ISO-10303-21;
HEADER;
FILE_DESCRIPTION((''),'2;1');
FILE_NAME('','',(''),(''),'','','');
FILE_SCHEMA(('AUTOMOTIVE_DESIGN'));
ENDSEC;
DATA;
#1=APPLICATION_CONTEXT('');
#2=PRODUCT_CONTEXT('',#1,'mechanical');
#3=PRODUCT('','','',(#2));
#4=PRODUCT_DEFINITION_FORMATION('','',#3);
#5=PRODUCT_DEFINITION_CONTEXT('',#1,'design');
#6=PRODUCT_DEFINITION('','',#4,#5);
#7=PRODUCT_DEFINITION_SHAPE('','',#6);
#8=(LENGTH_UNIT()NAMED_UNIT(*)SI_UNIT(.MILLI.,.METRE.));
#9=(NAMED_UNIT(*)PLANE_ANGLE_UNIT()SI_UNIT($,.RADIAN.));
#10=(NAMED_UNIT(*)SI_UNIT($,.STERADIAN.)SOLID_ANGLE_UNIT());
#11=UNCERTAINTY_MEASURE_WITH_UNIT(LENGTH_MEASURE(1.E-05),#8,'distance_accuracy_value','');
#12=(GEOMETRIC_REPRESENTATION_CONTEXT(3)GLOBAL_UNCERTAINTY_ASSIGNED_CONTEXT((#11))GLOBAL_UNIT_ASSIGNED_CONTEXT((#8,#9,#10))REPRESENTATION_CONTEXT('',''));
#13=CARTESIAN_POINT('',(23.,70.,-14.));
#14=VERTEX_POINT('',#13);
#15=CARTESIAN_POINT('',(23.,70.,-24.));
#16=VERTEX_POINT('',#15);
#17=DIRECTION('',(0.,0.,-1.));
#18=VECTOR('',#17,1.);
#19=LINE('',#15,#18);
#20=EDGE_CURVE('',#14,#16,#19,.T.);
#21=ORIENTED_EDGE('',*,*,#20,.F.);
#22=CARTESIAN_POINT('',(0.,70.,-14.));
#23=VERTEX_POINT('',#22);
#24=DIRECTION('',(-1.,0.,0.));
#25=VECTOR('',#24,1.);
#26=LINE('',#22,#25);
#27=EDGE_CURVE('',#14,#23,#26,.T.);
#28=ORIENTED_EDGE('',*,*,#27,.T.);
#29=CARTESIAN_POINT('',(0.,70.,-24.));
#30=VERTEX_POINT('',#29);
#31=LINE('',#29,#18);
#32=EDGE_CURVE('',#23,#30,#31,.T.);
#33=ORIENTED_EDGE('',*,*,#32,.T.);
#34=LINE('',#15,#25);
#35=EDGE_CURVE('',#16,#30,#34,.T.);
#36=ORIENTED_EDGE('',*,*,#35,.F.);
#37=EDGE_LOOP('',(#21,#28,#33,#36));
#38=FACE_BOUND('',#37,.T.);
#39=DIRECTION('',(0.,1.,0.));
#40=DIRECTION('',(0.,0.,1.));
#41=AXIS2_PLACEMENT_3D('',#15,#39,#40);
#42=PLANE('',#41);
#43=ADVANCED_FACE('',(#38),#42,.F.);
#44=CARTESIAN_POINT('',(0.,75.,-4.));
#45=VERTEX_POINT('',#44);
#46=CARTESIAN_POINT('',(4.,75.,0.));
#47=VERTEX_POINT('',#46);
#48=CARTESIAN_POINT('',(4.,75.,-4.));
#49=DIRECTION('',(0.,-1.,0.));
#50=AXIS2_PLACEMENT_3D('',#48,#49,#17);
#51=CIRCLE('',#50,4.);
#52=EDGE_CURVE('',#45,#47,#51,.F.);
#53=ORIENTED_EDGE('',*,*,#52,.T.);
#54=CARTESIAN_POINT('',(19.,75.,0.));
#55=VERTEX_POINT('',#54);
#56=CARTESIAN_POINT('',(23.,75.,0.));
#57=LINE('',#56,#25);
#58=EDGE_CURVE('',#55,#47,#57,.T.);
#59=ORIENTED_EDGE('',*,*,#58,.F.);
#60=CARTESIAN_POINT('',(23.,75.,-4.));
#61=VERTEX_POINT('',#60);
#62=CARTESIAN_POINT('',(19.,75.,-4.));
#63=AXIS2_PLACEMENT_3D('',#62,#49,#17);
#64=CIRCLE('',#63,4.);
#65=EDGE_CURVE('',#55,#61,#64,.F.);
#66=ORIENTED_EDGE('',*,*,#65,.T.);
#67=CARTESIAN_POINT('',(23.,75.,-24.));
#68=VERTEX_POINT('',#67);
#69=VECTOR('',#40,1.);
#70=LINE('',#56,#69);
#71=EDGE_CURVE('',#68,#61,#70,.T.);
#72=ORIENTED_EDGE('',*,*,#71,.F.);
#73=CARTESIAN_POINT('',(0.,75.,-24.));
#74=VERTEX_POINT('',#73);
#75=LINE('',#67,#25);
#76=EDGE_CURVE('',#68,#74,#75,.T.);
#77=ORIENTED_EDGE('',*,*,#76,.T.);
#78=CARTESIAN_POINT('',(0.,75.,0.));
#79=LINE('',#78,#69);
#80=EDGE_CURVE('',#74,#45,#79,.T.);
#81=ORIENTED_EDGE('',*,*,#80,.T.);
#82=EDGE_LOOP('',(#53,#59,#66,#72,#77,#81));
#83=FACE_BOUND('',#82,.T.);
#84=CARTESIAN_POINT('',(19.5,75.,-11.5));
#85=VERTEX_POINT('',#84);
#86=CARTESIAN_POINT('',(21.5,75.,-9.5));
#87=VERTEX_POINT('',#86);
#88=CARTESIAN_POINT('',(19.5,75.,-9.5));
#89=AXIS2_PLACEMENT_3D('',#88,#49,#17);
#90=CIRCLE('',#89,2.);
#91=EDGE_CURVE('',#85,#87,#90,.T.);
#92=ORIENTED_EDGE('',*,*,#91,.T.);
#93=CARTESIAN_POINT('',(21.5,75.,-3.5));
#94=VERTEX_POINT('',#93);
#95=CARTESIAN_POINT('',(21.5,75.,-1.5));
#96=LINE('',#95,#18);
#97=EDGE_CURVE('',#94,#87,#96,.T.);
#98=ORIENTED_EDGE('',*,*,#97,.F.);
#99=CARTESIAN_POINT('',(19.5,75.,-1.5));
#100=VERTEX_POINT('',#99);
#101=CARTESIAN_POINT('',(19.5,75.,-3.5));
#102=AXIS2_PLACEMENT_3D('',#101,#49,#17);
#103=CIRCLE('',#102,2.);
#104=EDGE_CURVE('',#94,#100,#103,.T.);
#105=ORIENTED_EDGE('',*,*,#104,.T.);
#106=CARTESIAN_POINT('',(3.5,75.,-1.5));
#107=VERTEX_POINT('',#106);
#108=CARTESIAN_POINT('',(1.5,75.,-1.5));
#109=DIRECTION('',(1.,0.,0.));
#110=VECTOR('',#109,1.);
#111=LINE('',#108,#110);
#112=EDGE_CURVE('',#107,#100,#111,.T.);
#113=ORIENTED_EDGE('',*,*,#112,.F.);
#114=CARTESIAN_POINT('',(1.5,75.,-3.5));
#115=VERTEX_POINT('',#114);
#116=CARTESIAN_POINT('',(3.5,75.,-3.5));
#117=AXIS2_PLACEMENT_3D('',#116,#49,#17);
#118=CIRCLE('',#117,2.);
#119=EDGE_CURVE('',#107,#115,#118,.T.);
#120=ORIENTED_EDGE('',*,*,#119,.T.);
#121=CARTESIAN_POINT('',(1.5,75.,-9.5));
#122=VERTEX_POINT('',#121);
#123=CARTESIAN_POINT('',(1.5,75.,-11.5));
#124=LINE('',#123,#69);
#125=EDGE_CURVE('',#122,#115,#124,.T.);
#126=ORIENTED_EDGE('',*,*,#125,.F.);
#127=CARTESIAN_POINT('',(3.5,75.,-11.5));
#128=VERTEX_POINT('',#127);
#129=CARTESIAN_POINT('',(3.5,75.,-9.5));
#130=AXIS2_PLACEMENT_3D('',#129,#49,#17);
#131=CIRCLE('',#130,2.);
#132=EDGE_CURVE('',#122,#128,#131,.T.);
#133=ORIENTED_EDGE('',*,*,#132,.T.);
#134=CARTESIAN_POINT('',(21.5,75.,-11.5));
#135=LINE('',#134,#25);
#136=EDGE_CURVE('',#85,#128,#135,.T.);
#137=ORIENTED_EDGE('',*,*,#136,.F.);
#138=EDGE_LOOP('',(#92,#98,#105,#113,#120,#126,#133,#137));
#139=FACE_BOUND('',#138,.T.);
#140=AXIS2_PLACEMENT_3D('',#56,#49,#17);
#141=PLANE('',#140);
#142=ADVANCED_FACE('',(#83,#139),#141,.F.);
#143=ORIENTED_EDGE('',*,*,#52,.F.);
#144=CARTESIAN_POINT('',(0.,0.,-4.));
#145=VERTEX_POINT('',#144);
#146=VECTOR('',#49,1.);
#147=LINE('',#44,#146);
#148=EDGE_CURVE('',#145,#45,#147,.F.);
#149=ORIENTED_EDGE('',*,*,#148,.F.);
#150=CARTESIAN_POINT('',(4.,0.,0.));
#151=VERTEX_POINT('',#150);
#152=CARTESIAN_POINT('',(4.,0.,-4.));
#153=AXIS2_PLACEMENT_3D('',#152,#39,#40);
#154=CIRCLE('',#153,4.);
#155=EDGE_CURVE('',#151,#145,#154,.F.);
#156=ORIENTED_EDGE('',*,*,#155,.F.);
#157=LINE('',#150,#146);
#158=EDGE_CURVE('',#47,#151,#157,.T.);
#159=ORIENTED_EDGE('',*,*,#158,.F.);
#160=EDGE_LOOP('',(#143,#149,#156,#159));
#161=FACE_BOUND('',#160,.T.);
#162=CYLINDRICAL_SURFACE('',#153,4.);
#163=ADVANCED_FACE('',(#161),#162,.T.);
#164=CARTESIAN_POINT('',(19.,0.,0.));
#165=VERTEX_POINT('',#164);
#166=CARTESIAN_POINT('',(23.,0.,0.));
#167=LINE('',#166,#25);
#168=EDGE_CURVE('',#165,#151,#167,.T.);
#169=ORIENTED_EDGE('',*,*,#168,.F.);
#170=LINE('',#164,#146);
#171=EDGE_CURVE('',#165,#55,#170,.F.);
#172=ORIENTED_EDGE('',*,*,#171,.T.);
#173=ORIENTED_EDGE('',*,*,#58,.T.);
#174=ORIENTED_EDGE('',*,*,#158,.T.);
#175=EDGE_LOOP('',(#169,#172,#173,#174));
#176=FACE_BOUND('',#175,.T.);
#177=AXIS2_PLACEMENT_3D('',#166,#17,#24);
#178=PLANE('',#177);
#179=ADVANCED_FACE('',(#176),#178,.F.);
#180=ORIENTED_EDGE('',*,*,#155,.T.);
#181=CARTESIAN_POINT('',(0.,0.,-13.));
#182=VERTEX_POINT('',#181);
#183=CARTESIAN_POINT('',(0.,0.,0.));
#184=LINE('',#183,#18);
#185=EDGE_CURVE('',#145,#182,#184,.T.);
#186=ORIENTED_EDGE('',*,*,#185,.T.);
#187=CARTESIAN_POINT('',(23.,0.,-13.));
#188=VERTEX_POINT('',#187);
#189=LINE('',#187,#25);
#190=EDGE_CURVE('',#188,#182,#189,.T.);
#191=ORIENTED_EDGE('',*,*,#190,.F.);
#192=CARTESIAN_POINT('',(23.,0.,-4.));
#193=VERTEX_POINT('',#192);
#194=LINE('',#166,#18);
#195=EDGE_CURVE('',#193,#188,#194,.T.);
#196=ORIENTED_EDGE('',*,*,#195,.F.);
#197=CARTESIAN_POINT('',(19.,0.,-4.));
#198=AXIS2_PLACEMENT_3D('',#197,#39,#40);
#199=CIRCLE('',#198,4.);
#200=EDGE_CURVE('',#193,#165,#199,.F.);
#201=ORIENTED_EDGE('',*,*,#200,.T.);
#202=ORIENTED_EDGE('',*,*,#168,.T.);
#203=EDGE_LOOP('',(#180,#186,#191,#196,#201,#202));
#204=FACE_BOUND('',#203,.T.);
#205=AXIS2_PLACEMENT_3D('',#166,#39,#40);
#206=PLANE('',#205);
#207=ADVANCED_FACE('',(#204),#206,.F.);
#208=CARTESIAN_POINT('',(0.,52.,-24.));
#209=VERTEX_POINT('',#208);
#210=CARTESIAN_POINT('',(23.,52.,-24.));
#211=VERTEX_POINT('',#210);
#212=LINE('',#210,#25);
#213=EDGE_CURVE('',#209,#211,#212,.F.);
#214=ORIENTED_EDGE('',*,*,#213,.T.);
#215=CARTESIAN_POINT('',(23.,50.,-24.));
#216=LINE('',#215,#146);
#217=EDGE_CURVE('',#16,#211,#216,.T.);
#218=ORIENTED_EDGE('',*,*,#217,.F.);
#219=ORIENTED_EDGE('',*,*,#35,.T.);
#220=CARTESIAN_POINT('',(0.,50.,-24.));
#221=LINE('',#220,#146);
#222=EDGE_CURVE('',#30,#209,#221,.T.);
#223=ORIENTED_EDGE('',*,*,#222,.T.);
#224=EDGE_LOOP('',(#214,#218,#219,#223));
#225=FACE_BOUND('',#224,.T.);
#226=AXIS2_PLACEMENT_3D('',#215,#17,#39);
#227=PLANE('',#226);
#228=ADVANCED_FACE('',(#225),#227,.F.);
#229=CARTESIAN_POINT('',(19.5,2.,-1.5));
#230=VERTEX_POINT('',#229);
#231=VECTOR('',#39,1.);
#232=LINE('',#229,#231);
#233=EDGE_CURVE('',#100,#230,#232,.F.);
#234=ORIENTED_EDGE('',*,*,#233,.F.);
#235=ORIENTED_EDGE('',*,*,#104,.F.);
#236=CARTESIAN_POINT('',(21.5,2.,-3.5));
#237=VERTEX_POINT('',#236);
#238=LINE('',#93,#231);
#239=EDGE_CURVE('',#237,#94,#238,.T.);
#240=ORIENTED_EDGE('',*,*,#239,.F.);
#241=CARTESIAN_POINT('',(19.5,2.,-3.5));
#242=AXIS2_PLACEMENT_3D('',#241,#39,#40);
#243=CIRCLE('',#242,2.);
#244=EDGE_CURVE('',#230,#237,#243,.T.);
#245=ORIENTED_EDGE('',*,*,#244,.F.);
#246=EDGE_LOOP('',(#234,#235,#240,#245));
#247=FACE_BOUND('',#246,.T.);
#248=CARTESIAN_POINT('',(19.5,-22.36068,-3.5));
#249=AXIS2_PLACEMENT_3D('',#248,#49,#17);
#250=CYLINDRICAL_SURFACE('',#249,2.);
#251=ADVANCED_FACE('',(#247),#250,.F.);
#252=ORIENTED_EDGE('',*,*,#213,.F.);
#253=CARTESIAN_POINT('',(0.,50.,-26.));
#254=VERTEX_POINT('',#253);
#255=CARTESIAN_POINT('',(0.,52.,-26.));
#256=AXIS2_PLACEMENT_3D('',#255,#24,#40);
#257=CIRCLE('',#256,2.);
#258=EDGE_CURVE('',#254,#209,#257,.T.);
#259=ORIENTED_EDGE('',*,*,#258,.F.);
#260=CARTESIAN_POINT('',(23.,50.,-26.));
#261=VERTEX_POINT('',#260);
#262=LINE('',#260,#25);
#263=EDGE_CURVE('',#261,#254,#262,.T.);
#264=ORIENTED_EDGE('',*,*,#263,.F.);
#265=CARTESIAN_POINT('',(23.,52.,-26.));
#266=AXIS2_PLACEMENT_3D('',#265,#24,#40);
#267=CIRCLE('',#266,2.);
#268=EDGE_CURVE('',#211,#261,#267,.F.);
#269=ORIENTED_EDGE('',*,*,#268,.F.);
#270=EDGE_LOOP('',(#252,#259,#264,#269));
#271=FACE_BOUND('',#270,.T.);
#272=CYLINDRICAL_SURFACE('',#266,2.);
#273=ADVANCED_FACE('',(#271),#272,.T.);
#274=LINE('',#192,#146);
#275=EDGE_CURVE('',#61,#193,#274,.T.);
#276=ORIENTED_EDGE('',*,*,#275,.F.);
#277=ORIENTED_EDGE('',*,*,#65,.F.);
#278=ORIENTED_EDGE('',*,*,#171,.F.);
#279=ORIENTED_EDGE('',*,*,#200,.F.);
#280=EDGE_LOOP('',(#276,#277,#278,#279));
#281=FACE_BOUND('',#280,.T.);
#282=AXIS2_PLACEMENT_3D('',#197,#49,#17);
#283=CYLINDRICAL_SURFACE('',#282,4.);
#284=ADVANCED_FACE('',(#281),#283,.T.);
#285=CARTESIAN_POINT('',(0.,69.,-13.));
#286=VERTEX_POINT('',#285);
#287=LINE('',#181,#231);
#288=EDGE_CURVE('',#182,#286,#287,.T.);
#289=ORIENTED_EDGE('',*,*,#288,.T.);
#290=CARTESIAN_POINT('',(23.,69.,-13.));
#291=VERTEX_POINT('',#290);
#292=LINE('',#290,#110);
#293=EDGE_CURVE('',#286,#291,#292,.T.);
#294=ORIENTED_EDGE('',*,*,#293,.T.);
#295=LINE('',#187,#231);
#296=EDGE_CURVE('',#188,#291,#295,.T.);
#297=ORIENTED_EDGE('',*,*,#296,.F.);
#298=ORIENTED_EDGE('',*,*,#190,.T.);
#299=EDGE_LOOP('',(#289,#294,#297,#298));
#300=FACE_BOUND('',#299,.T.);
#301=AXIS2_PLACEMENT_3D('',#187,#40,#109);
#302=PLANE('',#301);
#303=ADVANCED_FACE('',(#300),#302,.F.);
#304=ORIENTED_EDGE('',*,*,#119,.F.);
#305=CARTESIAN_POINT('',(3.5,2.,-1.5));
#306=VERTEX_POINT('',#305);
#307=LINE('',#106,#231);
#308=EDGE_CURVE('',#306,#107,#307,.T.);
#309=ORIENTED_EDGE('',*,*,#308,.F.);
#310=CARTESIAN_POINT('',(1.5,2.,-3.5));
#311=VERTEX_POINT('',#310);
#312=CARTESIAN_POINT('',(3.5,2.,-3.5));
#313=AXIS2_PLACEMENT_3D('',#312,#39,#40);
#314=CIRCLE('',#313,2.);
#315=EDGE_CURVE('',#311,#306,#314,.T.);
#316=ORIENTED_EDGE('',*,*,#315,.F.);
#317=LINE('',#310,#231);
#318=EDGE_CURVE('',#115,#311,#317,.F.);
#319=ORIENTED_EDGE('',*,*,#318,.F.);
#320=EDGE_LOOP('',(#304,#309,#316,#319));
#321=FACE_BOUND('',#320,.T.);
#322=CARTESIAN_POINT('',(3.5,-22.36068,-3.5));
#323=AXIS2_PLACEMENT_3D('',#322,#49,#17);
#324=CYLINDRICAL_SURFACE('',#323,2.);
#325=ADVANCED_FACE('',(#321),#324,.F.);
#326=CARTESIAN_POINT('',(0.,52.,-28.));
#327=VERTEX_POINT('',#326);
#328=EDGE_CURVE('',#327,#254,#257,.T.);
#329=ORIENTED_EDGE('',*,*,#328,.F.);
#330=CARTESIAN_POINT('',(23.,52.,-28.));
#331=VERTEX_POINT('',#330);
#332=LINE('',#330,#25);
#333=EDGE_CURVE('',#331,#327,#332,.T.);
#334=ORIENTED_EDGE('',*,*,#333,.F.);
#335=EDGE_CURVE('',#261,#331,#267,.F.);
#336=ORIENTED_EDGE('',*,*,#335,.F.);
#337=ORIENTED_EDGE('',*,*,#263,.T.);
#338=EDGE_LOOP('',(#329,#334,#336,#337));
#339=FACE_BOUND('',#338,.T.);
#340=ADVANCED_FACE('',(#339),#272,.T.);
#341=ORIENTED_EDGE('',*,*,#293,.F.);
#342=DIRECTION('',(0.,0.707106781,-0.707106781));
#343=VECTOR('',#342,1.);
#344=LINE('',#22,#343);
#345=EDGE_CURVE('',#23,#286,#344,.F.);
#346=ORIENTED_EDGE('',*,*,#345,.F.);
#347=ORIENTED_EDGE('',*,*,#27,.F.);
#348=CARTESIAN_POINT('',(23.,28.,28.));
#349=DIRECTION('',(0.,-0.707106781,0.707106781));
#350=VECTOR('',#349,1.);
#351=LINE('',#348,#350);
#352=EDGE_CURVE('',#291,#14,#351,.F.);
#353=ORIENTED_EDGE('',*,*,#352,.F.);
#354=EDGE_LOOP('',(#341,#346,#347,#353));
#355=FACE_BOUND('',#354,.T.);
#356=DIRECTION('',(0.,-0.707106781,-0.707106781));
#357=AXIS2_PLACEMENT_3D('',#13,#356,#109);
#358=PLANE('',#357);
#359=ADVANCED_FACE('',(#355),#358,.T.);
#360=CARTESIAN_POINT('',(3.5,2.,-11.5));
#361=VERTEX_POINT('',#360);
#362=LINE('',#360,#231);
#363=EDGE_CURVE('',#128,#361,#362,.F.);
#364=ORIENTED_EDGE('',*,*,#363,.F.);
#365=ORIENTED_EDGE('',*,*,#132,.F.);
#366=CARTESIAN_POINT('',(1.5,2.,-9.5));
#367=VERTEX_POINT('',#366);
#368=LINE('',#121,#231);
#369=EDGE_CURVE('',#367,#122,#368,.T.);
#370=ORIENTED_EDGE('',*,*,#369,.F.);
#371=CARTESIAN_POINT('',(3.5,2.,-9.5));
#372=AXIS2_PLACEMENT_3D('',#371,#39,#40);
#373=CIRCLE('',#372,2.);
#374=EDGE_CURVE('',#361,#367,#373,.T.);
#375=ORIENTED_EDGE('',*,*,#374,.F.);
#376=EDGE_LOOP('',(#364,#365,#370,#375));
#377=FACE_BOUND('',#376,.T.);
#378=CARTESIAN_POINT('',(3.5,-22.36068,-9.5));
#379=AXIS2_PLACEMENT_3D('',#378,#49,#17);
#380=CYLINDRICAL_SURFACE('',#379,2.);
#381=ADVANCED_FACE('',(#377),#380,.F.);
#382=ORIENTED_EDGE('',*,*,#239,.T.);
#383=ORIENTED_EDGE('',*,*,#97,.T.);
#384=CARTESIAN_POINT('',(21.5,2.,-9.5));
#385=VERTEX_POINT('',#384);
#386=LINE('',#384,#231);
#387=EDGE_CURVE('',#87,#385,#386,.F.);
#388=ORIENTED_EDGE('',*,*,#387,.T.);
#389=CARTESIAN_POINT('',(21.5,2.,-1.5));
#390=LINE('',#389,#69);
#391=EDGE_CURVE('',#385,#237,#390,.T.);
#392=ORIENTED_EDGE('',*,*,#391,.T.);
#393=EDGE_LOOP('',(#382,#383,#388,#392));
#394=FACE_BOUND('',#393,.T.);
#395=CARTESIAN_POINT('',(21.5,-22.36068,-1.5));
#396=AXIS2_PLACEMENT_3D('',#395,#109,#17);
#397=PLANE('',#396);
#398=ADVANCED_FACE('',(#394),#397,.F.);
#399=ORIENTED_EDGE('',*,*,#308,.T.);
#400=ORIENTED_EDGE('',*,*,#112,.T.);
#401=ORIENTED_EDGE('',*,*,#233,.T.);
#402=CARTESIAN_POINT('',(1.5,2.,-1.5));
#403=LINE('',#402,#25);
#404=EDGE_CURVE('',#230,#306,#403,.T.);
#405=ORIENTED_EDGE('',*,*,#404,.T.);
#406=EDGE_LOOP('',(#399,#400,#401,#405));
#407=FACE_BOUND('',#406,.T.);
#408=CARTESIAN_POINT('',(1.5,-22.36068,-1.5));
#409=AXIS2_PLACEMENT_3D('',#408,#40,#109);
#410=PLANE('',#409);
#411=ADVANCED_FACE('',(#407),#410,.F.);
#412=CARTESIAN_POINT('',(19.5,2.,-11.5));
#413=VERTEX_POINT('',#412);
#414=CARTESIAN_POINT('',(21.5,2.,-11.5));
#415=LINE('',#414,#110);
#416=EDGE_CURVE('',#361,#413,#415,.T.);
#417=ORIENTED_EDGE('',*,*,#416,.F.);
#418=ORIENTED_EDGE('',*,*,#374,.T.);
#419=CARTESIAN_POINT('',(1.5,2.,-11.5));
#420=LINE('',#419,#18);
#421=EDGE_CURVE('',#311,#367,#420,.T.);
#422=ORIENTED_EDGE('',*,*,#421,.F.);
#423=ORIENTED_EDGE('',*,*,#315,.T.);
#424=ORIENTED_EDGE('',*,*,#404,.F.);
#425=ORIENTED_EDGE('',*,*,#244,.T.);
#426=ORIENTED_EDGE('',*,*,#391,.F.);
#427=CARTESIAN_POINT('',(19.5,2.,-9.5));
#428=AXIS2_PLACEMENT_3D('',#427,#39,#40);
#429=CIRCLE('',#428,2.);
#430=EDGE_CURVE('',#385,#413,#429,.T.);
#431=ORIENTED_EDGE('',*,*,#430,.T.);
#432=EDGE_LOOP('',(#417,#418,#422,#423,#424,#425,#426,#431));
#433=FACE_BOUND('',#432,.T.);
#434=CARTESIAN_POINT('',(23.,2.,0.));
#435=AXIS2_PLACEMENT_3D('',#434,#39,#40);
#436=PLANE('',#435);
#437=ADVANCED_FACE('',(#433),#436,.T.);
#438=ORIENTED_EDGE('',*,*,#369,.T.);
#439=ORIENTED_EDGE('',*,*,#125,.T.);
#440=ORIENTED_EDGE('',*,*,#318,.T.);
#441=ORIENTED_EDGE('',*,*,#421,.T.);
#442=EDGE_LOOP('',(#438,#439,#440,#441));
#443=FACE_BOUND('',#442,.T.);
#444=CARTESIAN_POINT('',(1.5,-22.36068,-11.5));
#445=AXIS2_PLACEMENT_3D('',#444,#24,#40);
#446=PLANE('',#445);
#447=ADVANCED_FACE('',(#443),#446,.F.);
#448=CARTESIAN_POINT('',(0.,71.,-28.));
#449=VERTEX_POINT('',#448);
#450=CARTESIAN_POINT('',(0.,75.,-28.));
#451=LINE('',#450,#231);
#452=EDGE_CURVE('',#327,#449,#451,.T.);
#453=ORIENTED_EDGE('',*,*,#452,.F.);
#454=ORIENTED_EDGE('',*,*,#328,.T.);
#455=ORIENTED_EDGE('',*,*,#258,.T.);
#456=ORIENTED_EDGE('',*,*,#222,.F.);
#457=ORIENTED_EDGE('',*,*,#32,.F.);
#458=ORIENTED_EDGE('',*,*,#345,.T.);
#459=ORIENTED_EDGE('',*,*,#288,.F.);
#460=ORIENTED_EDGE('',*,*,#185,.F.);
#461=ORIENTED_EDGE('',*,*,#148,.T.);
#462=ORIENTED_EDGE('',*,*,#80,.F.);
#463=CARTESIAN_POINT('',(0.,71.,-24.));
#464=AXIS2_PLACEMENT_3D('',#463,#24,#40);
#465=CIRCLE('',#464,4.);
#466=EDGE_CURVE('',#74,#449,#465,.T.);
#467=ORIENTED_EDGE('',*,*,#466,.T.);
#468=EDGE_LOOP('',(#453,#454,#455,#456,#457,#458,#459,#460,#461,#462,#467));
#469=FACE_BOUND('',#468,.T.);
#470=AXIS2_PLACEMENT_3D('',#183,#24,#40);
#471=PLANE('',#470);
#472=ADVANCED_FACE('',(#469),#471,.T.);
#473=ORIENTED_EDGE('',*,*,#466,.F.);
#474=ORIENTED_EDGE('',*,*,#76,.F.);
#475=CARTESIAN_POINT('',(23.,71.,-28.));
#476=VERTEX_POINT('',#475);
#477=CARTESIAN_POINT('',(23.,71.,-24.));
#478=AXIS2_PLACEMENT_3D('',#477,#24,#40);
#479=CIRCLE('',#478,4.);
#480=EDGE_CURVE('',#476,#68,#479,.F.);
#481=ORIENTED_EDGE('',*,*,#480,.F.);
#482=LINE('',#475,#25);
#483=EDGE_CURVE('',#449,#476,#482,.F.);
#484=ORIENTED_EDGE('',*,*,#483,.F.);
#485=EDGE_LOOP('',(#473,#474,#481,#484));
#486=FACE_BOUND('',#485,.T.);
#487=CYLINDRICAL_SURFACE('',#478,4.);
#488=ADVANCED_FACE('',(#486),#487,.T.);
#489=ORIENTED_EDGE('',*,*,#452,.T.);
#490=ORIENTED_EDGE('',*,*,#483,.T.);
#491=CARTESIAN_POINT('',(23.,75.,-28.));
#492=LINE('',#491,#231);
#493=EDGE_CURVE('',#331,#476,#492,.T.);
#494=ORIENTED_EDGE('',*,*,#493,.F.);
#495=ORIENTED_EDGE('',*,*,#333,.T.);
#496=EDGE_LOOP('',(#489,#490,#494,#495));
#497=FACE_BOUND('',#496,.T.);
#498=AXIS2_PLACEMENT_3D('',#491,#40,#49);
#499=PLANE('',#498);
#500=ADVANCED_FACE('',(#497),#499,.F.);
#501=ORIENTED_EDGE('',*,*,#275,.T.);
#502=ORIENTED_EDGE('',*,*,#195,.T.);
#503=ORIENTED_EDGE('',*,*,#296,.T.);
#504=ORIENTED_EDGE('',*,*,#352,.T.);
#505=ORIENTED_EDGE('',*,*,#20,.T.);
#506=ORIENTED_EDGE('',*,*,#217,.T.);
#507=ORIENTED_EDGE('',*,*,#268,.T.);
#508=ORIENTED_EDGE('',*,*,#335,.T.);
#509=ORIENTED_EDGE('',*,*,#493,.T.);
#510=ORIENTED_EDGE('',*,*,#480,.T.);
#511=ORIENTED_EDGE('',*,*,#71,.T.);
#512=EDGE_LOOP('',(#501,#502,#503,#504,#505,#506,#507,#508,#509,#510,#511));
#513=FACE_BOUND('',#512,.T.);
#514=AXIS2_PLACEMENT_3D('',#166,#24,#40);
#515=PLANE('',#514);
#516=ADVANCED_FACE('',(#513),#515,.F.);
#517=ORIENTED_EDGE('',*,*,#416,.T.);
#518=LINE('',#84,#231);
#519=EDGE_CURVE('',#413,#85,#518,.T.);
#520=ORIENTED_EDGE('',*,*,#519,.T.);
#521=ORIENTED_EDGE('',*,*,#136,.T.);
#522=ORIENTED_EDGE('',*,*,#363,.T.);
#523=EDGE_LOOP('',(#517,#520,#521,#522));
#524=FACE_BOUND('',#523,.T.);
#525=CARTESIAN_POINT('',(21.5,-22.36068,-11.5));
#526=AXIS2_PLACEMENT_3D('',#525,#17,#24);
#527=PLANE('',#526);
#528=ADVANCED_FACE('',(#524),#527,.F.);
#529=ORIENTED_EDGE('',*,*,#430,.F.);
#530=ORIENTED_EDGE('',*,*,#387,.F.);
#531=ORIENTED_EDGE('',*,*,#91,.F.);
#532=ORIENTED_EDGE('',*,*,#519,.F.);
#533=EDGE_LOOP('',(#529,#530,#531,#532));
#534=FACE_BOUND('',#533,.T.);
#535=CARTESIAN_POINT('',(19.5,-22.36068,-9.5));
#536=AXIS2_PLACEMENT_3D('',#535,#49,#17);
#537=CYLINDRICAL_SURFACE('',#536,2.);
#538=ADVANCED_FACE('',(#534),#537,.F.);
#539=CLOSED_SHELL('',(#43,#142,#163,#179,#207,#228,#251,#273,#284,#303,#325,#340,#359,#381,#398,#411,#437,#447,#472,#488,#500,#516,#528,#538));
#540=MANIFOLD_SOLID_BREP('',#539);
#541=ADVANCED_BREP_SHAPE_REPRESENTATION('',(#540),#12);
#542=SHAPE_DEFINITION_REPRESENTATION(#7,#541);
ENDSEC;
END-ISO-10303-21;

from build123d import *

# Parameters (mm, degrees)
BOSS_EXTRUDE1_DEPTH = 23
SKETCH3_W           = 20
SKETCH3_H           = 10
CUT_EXTRUDE1_DEPTH  = 73
CHAMFER1_SIZE       = 1
FILLET1_R           = 4
FILLET2_R           = 2
FILLET3_R           = 4
FILLET4_R           = 2


with BuildPart() as part:
    # Sketch2 → Boss-Extrude1 (new body)
    with BuildSketch(Plane(origin=(0, 0, 0), x_dir=(0, 0, -1), z_dir=(1, 0, 0))):
        Polygon((0, 0), (13, 0), (13, 70), (24, 70), (24, 50), (28, 50), (28, 75), (0, 75), align=None)
    extrude(amount=BOSS_EXTRUDE1_DEPTH)

    # Sketch3 → Cut-Extrude1 (cut)
    with BuildSketch(Plane(origin=(0, 75, 0), x_dir=(1, 0, 0), z_dir=(0, 1, 0))):
        with Locations((11.5, 6.5)):
            Rectangle(SKETCH3_W, SKETCH3_H)
    extrude(amount=-CUT_EXTRUDE1_DEPTH, mode=Mode.SUBTRACT)

    # Chamfer1
    chamfer1_edges = [part.edges().sort_by_distance(p)[0] for p in [
        (11.5, 70, -13),
    ]]
    chamfer(chamfer1_edges, length=CHAMFER1_SIZE)

    # Fillet1
    fillet1_edges = [part.edges().sort_by_distance(p)[0] for p in [
        (0, 37.5, 0),
        (23, 37.5, 0),
    ]]
    fillet(fillet1_edges, radius=FILLET1_R)

    # Fillet2
    fillet2_edges = [part.edges().sort_by_distance(p)[0] for p in [
        (1.5, 38.5, -11.5),
        (21.5, 38.5, -11.5),
        (21.5, 38.5, -1.5),
        (1.5, 38.5, -1.5),
    ]]
    fillet(fillet2_edges, radius=FILLET2_R)

    # Fillet3
    fillet3_edges = [part.edges().sort_by_distance(p)[0] for p in [
        (11.5, 75, -28),
    ]]
    fillet(fillet3_edges, radius=FILLET3_R)

    # Fillet4
    fillet4_edges = [part.edges().sort_by_distance(p)[0] for p in [
        (11.5, 50, -28),
        (11.5, 50, -24),
    ]]
    fillet(fillet4_edges, radius=FILLET4_R - 0.0001)  # a hair under: the kernel refuses the full size


solid = part.part
